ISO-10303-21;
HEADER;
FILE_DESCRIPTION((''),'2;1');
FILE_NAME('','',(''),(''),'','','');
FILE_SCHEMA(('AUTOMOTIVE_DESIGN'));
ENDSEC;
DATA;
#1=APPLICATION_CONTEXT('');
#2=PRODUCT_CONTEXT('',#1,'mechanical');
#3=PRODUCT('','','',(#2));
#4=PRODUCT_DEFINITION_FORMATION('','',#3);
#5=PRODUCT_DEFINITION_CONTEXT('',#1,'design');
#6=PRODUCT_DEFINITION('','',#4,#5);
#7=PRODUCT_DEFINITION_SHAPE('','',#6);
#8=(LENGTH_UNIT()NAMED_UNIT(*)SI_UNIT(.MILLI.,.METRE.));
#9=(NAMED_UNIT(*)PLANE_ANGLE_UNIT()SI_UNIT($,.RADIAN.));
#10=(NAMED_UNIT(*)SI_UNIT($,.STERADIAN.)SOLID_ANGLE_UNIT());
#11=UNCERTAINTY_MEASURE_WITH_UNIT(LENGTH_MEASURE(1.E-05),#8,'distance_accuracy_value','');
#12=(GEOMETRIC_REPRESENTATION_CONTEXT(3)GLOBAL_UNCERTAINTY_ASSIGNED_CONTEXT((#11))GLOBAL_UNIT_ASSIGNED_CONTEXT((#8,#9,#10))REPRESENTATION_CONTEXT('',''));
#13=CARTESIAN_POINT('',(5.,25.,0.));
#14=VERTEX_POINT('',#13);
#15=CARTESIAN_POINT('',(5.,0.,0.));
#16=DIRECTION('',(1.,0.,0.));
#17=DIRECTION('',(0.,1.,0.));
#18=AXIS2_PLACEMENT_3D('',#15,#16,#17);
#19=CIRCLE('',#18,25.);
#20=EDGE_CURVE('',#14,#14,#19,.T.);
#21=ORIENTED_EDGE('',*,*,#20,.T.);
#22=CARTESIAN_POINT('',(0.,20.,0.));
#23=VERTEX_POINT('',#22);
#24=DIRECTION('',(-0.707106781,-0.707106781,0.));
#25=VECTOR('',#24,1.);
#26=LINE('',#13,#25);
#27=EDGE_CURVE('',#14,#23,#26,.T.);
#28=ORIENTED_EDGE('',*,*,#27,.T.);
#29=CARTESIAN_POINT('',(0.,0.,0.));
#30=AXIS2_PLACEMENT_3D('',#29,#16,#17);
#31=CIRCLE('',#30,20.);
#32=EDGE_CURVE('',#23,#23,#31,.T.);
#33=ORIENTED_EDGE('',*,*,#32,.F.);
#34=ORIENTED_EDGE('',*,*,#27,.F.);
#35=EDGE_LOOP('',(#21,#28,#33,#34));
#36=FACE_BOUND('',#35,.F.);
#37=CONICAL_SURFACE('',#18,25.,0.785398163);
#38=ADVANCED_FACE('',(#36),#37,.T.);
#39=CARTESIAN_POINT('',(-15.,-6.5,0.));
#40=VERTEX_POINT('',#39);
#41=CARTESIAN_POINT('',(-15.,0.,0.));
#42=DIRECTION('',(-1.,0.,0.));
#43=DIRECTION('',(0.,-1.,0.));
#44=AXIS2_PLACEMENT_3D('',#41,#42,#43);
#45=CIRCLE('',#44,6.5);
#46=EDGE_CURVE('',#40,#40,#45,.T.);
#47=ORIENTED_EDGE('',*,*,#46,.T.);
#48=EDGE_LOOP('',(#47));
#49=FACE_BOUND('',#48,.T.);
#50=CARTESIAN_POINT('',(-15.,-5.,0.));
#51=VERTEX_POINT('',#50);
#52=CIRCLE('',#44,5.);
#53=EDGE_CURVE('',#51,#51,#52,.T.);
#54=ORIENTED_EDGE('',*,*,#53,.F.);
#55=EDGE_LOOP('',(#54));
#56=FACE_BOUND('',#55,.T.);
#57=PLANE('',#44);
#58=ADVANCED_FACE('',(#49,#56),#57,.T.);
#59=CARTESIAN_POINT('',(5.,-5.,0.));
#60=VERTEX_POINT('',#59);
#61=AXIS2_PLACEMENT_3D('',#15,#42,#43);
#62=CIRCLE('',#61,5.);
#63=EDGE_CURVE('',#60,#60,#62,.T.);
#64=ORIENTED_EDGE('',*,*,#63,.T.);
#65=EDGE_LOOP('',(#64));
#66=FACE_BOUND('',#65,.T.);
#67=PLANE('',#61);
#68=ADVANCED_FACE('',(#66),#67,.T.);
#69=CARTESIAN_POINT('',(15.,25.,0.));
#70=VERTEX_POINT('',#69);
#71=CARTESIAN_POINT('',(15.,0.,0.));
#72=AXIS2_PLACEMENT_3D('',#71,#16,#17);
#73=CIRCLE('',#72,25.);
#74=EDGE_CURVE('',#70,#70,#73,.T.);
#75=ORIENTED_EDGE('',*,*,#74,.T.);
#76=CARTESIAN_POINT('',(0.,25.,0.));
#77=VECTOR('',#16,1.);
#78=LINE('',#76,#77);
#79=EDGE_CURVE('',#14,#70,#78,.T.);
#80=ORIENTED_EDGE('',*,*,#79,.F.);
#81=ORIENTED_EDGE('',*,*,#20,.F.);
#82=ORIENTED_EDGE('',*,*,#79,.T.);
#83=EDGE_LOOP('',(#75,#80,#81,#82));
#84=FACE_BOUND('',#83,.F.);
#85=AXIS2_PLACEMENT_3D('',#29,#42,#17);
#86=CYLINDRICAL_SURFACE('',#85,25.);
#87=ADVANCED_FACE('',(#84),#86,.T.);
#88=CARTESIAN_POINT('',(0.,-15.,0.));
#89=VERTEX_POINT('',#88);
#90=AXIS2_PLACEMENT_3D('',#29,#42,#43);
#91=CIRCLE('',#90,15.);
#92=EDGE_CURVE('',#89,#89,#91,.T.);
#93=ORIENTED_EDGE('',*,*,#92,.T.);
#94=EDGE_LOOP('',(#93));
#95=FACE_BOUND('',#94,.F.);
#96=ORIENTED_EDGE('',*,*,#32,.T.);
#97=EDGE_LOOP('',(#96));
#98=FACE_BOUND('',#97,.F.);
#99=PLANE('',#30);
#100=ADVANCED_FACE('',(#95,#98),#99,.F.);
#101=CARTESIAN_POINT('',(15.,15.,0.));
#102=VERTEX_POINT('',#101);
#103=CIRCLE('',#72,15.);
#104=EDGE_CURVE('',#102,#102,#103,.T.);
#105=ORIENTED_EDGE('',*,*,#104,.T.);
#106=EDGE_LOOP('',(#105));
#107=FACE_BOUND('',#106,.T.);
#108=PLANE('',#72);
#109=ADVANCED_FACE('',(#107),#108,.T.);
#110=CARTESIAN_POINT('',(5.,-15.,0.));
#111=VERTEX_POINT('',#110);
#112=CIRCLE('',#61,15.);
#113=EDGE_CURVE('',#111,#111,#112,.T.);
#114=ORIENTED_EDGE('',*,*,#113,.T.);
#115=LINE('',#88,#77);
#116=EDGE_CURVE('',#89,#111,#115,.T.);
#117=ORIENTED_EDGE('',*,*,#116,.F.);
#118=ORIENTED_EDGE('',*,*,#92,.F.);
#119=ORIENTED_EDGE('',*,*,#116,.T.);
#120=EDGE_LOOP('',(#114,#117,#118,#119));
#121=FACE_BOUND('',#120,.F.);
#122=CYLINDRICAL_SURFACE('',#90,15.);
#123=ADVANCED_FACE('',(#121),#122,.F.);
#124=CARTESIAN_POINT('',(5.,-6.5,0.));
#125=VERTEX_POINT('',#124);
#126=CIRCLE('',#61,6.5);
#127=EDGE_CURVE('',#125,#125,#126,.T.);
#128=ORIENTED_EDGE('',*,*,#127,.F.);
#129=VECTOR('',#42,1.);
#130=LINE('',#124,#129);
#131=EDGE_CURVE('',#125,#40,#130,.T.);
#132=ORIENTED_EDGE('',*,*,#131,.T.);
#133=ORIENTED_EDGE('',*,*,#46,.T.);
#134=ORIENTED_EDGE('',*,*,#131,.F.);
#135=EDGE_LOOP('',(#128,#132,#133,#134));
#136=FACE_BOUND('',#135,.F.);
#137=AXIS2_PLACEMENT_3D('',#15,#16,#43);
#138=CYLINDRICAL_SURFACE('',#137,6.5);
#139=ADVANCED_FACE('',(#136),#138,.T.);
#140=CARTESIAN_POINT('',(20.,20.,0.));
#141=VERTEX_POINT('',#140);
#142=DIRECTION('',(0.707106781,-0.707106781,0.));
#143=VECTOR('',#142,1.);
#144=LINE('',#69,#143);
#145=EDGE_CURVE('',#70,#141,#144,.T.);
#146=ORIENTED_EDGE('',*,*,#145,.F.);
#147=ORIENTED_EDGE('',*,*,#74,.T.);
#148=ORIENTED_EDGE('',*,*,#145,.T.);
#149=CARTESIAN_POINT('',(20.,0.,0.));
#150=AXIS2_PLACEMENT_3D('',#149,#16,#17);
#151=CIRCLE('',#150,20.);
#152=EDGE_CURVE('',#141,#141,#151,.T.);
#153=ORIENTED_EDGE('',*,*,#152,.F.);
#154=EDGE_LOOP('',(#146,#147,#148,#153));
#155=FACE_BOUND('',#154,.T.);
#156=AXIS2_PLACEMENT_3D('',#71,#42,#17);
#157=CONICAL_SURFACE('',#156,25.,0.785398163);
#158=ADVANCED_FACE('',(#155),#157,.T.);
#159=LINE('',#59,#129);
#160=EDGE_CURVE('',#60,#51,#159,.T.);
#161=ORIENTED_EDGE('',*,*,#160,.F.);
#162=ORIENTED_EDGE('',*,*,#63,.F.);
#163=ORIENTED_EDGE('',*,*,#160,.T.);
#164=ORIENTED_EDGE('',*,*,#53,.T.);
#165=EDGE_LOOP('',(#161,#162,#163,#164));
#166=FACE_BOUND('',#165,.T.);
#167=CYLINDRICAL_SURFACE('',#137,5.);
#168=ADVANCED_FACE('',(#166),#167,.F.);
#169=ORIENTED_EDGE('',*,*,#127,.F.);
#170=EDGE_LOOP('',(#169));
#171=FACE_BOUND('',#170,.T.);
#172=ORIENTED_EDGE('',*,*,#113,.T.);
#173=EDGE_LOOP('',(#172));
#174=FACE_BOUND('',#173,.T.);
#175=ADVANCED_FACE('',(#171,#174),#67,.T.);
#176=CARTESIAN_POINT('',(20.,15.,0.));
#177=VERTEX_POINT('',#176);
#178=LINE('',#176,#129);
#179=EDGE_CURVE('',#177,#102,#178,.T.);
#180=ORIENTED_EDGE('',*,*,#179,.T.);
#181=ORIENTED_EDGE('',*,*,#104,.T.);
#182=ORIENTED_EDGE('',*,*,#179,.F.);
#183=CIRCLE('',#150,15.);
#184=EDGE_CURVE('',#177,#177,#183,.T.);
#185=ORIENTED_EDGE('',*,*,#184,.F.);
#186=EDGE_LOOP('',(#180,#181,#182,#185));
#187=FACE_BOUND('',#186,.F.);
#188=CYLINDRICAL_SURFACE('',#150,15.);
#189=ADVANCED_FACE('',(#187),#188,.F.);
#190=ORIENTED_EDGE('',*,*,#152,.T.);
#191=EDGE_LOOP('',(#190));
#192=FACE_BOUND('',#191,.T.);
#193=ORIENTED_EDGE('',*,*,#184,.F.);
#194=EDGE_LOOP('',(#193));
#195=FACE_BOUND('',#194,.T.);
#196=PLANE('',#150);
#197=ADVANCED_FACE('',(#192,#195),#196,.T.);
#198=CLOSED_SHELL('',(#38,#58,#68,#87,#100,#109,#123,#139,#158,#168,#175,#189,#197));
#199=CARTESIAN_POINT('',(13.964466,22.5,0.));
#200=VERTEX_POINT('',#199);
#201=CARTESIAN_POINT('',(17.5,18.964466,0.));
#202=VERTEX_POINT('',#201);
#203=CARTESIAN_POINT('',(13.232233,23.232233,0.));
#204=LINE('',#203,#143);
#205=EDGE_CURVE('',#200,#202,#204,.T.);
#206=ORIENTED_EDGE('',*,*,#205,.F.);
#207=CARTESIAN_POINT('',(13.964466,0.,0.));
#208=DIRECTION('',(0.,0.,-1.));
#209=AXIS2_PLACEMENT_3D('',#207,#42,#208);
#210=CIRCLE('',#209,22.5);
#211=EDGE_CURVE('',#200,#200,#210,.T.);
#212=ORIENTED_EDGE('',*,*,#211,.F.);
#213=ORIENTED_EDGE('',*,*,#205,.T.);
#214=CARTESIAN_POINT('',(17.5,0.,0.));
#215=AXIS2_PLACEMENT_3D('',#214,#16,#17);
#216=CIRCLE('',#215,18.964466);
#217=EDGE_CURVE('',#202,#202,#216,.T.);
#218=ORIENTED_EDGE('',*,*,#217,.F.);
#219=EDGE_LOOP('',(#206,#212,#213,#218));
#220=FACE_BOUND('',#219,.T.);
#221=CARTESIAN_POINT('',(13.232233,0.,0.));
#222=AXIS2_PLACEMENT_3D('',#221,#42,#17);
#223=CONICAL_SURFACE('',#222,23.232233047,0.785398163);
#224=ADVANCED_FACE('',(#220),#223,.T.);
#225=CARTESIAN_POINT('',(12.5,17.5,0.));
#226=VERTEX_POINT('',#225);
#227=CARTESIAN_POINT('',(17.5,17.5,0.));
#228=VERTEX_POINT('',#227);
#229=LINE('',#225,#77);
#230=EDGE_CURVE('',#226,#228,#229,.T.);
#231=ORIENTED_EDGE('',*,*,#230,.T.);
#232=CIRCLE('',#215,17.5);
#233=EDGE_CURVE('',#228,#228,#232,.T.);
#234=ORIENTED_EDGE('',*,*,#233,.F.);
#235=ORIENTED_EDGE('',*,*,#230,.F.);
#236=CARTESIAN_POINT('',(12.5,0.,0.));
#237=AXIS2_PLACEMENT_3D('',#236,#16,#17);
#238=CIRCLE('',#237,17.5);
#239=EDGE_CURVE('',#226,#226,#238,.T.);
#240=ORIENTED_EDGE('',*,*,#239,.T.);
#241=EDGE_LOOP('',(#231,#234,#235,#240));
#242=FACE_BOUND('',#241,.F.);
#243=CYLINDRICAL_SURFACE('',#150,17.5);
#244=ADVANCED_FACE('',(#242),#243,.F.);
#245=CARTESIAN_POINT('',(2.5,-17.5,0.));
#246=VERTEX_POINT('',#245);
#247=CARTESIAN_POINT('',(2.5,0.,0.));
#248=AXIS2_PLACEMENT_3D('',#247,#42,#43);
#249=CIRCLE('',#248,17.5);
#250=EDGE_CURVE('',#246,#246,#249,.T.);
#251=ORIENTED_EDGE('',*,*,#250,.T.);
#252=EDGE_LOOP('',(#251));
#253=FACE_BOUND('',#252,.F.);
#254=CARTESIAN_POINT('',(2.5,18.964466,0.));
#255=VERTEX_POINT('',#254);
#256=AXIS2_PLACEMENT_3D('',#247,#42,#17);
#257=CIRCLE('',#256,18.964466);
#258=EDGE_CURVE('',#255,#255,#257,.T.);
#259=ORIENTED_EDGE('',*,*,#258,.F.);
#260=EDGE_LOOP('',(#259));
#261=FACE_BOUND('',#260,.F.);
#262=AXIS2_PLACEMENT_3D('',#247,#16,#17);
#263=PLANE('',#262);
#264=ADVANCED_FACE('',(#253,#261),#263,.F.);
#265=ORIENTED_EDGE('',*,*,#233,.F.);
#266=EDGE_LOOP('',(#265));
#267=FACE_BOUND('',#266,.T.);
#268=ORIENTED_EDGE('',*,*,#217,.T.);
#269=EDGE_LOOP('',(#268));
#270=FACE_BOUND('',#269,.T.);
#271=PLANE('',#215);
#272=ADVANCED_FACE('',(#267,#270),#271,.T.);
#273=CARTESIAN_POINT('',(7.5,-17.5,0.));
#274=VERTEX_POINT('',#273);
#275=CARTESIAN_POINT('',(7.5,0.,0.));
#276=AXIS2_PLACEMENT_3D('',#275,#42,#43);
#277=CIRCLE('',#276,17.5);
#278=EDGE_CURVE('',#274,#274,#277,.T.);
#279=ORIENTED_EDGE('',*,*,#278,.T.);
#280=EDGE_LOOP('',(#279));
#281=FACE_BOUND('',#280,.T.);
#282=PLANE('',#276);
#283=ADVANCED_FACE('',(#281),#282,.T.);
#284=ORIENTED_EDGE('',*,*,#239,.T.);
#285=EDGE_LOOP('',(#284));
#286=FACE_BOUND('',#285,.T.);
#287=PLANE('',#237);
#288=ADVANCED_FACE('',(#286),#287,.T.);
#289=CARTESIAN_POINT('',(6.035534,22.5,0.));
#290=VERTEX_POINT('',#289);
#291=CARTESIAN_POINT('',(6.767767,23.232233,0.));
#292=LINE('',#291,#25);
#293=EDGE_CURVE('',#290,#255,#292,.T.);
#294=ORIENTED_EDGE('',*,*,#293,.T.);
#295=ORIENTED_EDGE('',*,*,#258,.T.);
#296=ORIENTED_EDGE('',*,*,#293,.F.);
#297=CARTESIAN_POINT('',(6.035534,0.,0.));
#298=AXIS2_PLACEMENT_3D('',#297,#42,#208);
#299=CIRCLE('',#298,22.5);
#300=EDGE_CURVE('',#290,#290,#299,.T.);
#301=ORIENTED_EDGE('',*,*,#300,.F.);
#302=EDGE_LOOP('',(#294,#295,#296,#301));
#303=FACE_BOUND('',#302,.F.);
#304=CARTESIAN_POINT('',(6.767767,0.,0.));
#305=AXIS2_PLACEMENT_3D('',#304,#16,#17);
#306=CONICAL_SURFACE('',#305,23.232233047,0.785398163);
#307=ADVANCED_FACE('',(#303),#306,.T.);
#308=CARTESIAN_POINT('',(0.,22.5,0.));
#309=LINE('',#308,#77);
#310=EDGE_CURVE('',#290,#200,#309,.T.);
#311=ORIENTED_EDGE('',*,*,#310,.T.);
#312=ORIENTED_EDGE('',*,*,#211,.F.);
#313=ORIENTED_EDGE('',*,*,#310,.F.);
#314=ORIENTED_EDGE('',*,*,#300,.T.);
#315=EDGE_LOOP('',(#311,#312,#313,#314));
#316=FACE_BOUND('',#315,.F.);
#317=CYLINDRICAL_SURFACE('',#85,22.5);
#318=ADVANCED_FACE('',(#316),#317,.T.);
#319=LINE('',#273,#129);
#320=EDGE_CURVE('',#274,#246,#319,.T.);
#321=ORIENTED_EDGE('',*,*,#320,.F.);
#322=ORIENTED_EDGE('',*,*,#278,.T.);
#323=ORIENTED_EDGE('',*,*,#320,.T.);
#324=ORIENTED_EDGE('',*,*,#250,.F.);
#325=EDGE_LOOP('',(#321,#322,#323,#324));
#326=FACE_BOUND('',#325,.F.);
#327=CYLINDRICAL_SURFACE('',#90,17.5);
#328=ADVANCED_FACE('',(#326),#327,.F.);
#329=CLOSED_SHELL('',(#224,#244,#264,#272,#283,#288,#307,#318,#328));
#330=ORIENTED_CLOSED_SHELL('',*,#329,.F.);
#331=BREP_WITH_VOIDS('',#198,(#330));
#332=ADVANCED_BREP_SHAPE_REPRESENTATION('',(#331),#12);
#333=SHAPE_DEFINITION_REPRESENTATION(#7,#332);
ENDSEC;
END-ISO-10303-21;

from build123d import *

# Parameters (mm, degrees)
F0_R     = 25
F1_DEPTH = 20
F2_SIZE  = 5
F3_SIZE  = 5
F4_R     = 15
F5_DEPTH = 5
F6_R     = 15
F7_DEPTH = 5
F8_R     = 6.5
F8_R_2   = 5
F9_DEPTH = 20
F10_T    = 2.5


# Not quite as in the source:
# - a shell that OpenCascade refuses in one call is made with other operations: the cavity is built on its own and cut out


with BuildPart() as f1:
    # F0 (on Right) → F1 (new body)
    with BuildSketch(Plane.YZ):
        Circle(F0_R)
    extrude(amount=F1_DEPTH)

    # F2
    f2_edges = [f1.edges().sort_by_distance(p)[0] for p in [
        (20, -25, 0),
    ]]
    chamfer(f2_edges, length=F2_SIZE)

    # F3
    f3_edges = [f1.edges().sort_by_distance(p)[0] for p in [
        (0, -25, 0),
    ]]
    chamfer(f3_edges, length=F3_SIZE)

    # F4 (on face) → F5 (cut)
    with BuildSketch(Plane(origin=(0, 0, 0), x_dir=(0, -1, 0), z_dir=(-1, 0, 0))):
        Circle(F4_R)
    extrude(amount=-F5_DEPTH, mode=Mode.SUBTRACT)

    # F6 (on face) → F7 (cut)
    with BuildSketch(Plane.YZ.offset(20)):
        Circle(F6_R)
    extrude(amount=-F7_DEPTH, mode=Mode.SUBTRACT)

    # F8 (on face) → F9 (join)
    with BuildSketch(Plane(origin=(5, 0, 0), x_dir=(0, -1, 0), z_dir=(-1, 0, 0))):
        Circle(F8_R)
        Circle(F8_R_2, mode=Mode.SUBTRACT)
    extrude(amount=F9_DEPTH)

    # F10: shell of thickness 2.5, made by hand


with BuildPart() as f10_core1:
    # F10_t2: copy of F1
    add(f1.part)

    # the walls: a layer under each face that stays
    f10_faces = [f10_core1.faces().sort_by_distance(p)[0] for p in [
        (10, -25, 0),
        (2.5, -22.5, 0),
        (17.5, -22.5, 0),
        (0, -13.3333333333, -13.3333333333),
        (20, -13.3333333333, -13.3333333333),
        (2.5, 15, 0),
        (17.5, -15, 0),
        (5, 10, -10),
        (15, 0, 0),
        (-5, 6.5, 0),
        (-5, 5, 0),
        (5, 0, 0),
    ]]
    thicken(f10_faces, amount=-F10_T, mode=Mode.SUBTRACT)

    # F10_s3 → F10_t4 (revolve, cut)
    with BuildSketch(Plane.XY):
        Polygon((4.975, -14.975), (5, -17.5), (7.5, -17.5), (7.5, -15), align=None)
    revolve(axis=Axis((5, 0, 0), (-1, 0, 0)), mode=Mode.SUBTRACT)

    # F10_s5 → F10_t6 (revolve, cut)
    with BuildSketch(Plane.XY):
        Polygon((15.025, 14.975), (15, 17.5), (12.5, 17.5), (12.5, 15), align=None)
    revolve(axis=Axis((15, 0, 0), (1, 0, 0)), mode=Mode.SUBTRACT)

    # F10_s7 → F10_t8 (revolve, cut)
    with BuildSketch(Plane.XY):
        Polygon((4.975, -6.525), (7.5, -6.5), (7.5, -4), (5, -4), align=None)
    revolve(axis=Axis((5, 0, 0), (-1, 0, 0)), mode=Mode.SUBTRACT)

    # F10_s9 → F10_t10 (revolve, cut)
    with BuildSketch(Plane.XY):
        Polygon((4.975, -4.975), (5, -7.5), (7.5, -7.5), (7.5, -5), align=None)
    revolve(axis=Axis((5, 0, 0), (-1, 0, 0)), mode=Mode.SUBTRACT)


with BuildPart() as f1_1:
    add(f1.part)

    # what is left inside the walls is the cavity
    f10_cavity = [f10_core1.part.solids().sort_by_distance(p)[0] for p in [
        (11.321489, -22.475, 0),
    ]]
    add(f10_cavity, mode=Mode.SUBTRACT)


solid = f1_1.part
